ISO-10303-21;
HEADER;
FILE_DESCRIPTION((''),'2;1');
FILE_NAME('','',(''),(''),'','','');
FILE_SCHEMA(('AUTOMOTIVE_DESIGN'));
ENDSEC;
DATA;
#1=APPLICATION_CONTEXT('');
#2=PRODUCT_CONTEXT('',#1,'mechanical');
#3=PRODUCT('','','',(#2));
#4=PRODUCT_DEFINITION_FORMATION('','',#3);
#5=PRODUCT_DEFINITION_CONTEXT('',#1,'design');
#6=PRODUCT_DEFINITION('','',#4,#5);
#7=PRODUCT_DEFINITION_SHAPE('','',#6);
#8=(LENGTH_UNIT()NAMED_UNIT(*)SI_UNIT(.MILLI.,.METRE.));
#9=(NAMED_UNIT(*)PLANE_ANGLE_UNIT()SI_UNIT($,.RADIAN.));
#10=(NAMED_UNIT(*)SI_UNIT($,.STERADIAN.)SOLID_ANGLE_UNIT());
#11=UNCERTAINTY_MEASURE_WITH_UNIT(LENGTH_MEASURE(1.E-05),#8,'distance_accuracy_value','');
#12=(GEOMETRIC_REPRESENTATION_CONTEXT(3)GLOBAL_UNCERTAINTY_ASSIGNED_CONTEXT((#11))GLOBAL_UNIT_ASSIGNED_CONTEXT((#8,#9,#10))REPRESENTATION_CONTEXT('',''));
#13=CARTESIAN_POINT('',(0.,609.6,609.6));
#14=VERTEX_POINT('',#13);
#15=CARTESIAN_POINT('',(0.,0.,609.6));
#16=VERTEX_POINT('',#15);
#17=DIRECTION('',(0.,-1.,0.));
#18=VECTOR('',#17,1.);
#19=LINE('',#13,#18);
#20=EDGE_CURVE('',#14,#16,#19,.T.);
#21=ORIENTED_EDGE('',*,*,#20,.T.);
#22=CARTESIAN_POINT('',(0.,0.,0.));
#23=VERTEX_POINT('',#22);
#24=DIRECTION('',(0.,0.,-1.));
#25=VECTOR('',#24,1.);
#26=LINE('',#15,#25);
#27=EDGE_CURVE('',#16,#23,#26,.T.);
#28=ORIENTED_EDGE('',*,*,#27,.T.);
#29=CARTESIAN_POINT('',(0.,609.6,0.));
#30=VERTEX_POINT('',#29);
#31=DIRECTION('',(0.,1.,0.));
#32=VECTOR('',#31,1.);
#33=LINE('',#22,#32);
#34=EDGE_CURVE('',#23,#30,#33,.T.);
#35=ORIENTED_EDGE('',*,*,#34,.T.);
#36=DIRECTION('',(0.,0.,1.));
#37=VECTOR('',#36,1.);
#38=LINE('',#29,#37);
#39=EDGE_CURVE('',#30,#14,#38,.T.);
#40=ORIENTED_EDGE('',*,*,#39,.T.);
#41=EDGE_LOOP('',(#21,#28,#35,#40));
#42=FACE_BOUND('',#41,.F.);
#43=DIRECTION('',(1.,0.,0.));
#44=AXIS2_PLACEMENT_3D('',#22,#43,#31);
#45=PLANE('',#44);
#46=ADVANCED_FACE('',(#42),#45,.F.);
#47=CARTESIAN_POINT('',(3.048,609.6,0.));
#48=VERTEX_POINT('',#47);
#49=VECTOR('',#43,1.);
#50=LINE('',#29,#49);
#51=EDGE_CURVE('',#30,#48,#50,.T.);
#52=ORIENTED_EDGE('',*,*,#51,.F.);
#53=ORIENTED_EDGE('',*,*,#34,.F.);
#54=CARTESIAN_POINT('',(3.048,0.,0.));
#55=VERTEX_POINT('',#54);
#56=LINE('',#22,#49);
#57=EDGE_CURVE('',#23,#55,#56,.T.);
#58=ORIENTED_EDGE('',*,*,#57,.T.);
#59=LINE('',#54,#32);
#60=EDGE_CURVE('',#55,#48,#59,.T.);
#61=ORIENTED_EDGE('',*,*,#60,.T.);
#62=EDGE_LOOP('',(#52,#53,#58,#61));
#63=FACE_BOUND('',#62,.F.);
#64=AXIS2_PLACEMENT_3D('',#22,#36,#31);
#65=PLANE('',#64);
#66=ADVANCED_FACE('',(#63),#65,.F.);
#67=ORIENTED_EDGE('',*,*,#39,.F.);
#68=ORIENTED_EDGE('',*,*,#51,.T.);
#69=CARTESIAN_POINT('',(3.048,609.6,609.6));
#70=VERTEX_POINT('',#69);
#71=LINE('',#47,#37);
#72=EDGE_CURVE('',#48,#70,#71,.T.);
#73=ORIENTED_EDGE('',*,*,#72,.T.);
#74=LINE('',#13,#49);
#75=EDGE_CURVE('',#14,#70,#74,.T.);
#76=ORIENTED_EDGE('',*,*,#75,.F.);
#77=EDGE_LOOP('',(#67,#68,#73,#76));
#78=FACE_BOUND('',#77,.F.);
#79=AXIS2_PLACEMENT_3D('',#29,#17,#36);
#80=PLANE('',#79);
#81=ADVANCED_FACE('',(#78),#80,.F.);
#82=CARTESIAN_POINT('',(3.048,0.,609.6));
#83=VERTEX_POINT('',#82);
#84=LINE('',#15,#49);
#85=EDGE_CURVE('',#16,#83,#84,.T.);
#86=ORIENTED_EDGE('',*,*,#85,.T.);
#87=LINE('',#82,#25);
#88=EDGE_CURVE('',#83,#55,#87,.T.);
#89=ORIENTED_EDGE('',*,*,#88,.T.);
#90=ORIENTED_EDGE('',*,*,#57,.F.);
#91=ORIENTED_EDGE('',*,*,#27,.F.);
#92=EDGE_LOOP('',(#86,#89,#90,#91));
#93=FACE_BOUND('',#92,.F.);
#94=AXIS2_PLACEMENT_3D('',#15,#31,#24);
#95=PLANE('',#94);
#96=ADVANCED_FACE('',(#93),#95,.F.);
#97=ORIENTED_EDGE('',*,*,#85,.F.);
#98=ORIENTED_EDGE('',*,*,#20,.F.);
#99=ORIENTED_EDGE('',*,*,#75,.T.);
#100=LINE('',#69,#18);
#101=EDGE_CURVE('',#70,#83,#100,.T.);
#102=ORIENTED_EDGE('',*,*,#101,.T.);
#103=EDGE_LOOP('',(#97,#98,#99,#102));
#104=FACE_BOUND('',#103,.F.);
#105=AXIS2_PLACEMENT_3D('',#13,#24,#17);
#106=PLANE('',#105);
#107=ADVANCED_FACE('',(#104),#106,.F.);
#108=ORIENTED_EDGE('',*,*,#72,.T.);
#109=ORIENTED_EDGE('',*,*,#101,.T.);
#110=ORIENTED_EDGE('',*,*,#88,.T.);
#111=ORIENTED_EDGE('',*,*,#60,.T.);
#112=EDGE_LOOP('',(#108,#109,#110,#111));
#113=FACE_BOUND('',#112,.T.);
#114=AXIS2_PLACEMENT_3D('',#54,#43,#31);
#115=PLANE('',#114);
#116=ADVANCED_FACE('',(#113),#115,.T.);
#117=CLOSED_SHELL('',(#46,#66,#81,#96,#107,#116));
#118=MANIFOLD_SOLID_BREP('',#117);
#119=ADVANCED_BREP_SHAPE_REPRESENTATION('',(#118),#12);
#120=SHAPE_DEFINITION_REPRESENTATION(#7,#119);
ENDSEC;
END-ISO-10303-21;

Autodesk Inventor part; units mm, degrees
ref_plane "YZ Plane" through (0, 0, 0) normal (1, 0, 0) x (0, 1, 0)
ref_plane "XZ Plane" through (0, 0, 0) normal (0, 1, 0) x (-1, 0, 0)
ref_plane "XY Plane" through (0, 0, 0) normal (0, 0, 1) x (1, 0, 0)
sketch "Sketch1" plane through (0, 0, 0) normal (1, 0, 0) x (0, 1, 0)
  line L0 (0, 0) -> (609.6, 0)
  line L1 (609.6, 0) -> (609.6, 609.6)
  line L2 (609.6, 609.6) -> (0, 609.6)
  line L3 (0, 609.6) -> (0, 0)
  dimension "d0" = 609.6
  dimension "d2" = 609.6
extrude "Plate1" add sketch "Sketch1" along normal blind 3.048
equation "\"BendRadius\" = Thickness"
equation "\"BendReliefWidth\" = Thickness"
equation "\"BendReliefDepth\" = 0.5 * Thickness"
equation "\"CornerReliefSize\" = 4 * Thickness"
equation "\"MinimumRemnant\" = 2 * Thickness"
equation "\"TransitionRadius\" = BendRadius"
equation "\"JacobiRadiusSize\" = BendRadius"
equation "\"GapSize\" = Thickness"
equation "\"d3\" = BendRadius"
equation "\"Thickness\" = 3.048"
properties part number "Deflector Sheet"
